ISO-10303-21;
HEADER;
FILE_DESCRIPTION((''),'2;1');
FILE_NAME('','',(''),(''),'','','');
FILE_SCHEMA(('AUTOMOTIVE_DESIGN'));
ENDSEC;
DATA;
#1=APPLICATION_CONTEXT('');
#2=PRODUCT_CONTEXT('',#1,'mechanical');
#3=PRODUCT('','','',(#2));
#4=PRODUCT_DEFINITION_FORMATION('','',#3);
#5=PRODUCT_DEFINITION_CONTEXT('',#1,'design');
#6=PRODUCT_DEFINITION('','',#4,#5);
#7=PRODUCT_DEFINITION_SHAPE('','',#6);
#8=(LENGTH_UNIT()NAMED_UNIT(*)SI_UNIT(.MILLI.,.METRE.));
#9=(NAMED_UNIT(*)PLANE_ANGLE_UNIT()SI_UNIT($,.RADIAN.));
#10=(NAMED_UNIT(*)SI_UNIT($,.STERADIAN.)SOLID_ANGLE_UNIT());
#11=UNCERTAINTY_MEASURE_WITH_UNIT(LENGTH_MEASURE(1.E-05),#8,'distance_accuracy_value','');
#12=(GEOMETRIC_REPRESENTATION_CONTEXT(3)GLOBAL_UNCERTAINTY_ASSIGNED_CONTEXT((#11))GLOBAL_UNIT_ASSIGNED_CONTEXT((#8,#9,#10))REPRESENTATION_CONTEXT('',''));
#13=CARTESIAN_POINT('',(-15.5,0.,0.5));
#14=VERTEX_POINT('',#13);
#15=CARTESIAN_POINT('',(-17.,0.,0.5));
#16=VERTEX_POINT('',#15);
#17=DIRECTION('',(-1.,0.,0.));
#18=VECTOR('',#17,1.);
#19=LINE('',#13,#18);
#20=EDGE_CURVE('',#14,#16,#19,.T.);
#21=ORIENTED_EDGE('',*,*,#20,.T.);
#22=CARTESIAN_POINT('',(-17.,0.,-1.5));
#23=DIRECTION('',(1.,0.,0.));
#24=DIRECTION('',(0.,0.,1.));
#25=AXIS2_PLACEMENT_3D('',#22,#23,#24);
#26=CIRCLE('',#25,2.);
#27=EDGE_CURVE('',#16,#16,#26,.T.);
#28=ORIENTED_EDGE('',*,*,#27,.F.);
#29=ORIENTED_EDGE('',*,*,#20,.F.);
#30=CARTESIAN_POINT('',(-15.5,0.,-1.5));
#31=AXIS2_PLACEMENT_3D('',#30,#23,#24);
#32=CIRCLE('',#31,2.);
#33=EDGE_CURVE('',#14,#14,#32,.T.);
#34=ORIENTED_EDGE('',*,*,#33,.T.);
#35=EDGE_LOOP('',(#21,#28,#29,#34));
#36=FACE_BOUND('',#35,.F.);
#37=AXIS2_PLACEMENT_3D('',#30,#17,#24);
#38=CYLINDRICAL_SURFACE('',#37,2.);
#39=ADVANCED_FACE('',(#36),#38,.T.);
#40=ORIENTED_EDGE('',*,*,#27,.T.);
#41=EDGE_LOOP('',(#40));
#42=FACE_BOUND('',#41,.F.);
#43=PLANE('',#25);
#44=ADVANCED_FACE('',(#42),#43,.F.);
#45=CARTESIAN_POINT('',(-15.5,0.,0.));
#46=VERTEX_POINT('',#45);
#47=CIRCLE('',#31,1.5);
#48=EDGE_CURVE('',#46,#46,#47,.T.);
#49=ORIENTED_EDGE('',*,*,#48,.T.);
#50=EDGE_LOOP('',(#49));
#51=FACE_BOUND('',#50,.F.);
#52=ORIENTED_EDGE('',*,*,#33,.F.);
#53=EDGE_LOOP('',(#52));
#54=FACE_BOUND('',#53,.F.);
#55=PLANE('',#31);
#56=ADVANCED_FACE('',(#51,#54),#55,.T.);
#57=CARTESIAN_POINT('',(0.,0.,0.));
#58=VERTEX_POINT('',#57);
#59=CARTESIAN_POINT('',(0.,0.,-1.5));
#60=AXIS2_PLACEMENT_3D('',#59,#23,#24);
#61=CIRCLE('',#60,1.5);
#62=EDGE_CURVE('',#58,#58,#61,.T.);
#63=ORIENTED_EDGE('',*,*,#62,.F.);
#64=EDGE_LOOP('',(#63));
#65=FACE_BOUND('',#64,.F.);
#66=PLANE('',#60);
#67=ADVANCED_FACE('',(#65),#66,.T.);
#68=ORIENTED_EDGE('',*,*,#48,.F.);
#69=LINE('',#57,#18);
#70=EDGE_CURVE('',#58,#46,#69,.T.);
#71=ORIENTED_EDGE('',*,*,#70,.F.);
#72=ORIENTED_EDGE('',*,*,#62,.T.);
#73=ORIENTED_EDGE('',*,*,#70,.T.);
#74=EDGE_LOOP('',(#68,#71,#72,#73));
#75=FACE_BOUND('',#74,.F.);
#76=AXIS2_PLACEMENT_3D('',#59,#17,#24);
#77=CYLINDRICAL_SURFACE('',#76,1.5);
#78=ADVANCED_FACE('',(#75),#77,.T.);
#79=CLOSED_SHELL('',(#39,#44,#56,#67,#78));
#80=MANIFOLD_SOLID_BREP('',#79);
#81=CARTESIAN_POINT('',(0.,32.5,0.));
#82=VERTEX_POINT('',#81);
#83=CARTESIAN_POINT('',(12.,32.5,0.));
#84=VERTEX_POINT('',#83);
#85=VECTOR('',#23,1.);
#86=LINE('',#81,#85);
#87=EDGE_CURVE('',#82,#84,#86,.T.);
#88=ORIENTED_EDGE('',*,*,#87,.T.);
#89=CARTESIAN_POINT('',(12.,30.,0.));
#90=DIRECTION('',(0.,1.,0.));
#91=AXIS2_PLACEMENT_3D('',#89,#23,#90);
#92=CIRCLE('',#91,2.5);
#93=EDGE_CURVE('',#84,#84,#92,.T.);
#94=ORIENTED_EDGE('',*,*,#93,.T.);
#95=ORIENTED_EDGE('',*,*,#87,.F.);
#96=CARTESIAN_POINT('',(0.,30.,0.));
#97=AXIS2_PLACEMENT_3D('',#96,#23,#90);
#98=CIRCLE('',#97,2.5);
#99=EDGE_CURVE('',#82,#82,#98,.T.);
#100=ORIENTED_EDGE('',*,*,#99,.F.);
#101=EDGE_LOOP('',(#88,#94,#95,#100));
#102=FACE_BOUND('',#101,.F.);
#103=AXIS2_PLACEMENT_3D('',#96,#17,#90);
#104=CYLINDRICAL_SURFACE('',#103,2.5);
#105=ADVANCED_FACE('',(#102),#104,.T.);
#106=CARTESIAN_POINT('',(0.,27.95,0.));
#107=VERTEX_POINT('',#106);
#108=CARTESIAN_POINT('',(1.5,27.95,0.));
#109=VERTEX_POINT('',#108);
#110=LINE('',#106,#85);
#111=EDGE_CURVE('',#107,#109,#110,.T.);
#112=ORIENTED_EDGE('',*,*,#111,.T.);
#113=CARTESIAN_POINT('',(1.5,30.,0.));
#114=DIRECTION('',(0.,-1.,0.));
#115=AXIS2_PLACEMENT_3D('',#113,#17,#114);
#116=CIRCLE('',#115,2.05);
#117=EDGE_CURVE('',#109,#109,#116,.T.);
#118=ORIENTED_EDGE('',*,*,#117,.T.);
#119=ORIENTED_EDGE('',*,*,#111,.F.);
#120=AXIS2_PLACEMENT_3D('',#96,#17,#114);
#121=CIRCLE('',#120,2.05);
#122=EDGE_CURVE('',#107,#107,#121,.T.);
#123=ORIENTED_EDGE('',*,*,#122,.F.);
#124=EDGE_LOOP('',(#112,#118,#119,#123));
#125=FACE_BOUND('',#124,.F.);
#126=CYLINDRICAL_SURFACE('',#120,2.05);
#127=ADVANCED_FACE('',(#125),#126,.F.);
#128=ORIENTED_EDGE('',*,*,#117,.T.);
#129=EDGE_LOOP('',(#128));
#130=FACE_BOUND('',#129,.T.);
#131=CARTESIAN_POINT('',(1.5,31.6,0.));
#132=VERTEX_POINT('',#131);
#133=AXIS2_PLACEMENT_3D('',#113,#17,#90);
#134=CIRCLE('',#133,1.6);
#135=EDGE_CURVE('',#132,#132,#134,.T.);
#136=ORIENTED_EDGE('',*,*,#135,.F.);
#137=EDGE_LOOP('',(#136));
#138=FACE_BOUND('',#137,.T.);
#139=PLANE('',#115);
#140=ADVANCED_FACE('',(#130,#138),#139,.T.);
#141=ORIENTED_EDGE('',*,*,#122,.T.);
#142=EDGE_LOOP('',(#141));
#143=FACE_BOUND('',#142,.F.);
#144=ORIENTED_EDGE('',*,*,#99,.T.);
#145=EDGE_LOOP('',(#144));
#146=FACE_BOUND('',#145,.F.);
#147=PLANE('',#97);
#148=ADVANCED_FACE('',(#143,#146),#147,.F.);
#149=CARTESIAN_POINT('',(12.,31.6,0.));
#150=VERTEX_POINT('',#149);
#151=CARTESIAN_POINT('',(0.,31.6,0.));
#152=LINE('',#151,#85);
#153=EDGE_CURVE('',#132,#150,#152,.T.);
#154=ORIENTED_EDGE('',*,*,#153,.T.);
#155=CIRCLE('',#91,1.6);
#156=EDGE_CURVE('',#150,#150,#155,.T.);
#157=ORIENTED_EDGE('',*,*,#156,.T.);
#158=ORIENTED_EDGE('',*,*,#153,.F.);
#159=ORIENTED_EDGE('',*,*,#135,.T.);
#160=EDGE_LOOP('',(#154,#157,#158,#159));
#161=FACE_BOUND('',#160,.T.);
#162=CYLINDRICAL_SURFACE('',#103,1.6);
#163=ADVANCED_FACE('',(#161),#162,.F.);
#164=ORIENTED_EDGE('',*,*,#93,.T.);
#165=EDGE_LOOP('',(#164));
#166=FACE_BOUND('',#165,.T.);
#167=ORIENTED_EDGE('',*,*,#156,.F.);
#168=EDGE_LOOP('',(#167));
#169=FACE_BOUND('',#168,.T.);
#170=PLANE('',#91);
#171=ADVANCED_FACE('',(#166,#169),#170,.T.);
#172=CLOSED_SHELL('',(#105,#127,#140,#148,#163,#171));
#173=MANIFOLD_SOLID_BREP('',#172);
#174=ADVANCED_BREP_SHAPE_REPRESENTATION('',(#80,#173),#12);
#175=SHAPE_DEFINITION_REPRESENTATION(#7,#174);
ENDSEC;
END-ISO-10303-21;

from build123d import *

# Parameters (mm, degrees)
F1_R     = 2.5
F1_R_2   = 1.6
F2_DEPTH = 12
F4_R     = 2.05
F4_R_2   = 1.6
F5_DEPTH = 1.5


with BuildPart() as f2:
    # F1 (on Right) → F2 (new body)
    with BuildSketch(Plane.YZ):
        with Locations((30, 0)):
            Circle(F1_R)
        with Locations((30, 0)):
            Circle(F1_R_2, mode=Mode.SUBTRACT)
    extrude(amount=F2_DEPTH)

    # F4 (on face) → F5 (cut)
    with BuildSketch(Plane(origin=(0, 0, 0), x_dir=(0, -1, 0), z_dir=(-1, 0, 0))):
        with Locations((-30, 0)):
            Circle(F4_R)
        with Locations((-30, 0)):
            Circle(F4_R_2, mode=Mode.SUBTRACT)
        with Locations((-30, 0)):
            Circle(F4_R_2)
    extrude(amount=-F5_DEPTH, mode=Mode.SUBTRACT)


with BuildPart() as f3:
    # F0 (on Front) → F3 (revolve)
    with BuildSketch(Plane.XZ):
        Polygon((0, -1.5), (0, 0), (-15.5, 0), (-15.5, 0.5), (-17, 0.5), (-17, -1.5), align=None)
    revolve(axis=Axis((-8.5, 0, -1.5), (1, 0, 0)))


solid = Compound([f2.part, f3.part])
